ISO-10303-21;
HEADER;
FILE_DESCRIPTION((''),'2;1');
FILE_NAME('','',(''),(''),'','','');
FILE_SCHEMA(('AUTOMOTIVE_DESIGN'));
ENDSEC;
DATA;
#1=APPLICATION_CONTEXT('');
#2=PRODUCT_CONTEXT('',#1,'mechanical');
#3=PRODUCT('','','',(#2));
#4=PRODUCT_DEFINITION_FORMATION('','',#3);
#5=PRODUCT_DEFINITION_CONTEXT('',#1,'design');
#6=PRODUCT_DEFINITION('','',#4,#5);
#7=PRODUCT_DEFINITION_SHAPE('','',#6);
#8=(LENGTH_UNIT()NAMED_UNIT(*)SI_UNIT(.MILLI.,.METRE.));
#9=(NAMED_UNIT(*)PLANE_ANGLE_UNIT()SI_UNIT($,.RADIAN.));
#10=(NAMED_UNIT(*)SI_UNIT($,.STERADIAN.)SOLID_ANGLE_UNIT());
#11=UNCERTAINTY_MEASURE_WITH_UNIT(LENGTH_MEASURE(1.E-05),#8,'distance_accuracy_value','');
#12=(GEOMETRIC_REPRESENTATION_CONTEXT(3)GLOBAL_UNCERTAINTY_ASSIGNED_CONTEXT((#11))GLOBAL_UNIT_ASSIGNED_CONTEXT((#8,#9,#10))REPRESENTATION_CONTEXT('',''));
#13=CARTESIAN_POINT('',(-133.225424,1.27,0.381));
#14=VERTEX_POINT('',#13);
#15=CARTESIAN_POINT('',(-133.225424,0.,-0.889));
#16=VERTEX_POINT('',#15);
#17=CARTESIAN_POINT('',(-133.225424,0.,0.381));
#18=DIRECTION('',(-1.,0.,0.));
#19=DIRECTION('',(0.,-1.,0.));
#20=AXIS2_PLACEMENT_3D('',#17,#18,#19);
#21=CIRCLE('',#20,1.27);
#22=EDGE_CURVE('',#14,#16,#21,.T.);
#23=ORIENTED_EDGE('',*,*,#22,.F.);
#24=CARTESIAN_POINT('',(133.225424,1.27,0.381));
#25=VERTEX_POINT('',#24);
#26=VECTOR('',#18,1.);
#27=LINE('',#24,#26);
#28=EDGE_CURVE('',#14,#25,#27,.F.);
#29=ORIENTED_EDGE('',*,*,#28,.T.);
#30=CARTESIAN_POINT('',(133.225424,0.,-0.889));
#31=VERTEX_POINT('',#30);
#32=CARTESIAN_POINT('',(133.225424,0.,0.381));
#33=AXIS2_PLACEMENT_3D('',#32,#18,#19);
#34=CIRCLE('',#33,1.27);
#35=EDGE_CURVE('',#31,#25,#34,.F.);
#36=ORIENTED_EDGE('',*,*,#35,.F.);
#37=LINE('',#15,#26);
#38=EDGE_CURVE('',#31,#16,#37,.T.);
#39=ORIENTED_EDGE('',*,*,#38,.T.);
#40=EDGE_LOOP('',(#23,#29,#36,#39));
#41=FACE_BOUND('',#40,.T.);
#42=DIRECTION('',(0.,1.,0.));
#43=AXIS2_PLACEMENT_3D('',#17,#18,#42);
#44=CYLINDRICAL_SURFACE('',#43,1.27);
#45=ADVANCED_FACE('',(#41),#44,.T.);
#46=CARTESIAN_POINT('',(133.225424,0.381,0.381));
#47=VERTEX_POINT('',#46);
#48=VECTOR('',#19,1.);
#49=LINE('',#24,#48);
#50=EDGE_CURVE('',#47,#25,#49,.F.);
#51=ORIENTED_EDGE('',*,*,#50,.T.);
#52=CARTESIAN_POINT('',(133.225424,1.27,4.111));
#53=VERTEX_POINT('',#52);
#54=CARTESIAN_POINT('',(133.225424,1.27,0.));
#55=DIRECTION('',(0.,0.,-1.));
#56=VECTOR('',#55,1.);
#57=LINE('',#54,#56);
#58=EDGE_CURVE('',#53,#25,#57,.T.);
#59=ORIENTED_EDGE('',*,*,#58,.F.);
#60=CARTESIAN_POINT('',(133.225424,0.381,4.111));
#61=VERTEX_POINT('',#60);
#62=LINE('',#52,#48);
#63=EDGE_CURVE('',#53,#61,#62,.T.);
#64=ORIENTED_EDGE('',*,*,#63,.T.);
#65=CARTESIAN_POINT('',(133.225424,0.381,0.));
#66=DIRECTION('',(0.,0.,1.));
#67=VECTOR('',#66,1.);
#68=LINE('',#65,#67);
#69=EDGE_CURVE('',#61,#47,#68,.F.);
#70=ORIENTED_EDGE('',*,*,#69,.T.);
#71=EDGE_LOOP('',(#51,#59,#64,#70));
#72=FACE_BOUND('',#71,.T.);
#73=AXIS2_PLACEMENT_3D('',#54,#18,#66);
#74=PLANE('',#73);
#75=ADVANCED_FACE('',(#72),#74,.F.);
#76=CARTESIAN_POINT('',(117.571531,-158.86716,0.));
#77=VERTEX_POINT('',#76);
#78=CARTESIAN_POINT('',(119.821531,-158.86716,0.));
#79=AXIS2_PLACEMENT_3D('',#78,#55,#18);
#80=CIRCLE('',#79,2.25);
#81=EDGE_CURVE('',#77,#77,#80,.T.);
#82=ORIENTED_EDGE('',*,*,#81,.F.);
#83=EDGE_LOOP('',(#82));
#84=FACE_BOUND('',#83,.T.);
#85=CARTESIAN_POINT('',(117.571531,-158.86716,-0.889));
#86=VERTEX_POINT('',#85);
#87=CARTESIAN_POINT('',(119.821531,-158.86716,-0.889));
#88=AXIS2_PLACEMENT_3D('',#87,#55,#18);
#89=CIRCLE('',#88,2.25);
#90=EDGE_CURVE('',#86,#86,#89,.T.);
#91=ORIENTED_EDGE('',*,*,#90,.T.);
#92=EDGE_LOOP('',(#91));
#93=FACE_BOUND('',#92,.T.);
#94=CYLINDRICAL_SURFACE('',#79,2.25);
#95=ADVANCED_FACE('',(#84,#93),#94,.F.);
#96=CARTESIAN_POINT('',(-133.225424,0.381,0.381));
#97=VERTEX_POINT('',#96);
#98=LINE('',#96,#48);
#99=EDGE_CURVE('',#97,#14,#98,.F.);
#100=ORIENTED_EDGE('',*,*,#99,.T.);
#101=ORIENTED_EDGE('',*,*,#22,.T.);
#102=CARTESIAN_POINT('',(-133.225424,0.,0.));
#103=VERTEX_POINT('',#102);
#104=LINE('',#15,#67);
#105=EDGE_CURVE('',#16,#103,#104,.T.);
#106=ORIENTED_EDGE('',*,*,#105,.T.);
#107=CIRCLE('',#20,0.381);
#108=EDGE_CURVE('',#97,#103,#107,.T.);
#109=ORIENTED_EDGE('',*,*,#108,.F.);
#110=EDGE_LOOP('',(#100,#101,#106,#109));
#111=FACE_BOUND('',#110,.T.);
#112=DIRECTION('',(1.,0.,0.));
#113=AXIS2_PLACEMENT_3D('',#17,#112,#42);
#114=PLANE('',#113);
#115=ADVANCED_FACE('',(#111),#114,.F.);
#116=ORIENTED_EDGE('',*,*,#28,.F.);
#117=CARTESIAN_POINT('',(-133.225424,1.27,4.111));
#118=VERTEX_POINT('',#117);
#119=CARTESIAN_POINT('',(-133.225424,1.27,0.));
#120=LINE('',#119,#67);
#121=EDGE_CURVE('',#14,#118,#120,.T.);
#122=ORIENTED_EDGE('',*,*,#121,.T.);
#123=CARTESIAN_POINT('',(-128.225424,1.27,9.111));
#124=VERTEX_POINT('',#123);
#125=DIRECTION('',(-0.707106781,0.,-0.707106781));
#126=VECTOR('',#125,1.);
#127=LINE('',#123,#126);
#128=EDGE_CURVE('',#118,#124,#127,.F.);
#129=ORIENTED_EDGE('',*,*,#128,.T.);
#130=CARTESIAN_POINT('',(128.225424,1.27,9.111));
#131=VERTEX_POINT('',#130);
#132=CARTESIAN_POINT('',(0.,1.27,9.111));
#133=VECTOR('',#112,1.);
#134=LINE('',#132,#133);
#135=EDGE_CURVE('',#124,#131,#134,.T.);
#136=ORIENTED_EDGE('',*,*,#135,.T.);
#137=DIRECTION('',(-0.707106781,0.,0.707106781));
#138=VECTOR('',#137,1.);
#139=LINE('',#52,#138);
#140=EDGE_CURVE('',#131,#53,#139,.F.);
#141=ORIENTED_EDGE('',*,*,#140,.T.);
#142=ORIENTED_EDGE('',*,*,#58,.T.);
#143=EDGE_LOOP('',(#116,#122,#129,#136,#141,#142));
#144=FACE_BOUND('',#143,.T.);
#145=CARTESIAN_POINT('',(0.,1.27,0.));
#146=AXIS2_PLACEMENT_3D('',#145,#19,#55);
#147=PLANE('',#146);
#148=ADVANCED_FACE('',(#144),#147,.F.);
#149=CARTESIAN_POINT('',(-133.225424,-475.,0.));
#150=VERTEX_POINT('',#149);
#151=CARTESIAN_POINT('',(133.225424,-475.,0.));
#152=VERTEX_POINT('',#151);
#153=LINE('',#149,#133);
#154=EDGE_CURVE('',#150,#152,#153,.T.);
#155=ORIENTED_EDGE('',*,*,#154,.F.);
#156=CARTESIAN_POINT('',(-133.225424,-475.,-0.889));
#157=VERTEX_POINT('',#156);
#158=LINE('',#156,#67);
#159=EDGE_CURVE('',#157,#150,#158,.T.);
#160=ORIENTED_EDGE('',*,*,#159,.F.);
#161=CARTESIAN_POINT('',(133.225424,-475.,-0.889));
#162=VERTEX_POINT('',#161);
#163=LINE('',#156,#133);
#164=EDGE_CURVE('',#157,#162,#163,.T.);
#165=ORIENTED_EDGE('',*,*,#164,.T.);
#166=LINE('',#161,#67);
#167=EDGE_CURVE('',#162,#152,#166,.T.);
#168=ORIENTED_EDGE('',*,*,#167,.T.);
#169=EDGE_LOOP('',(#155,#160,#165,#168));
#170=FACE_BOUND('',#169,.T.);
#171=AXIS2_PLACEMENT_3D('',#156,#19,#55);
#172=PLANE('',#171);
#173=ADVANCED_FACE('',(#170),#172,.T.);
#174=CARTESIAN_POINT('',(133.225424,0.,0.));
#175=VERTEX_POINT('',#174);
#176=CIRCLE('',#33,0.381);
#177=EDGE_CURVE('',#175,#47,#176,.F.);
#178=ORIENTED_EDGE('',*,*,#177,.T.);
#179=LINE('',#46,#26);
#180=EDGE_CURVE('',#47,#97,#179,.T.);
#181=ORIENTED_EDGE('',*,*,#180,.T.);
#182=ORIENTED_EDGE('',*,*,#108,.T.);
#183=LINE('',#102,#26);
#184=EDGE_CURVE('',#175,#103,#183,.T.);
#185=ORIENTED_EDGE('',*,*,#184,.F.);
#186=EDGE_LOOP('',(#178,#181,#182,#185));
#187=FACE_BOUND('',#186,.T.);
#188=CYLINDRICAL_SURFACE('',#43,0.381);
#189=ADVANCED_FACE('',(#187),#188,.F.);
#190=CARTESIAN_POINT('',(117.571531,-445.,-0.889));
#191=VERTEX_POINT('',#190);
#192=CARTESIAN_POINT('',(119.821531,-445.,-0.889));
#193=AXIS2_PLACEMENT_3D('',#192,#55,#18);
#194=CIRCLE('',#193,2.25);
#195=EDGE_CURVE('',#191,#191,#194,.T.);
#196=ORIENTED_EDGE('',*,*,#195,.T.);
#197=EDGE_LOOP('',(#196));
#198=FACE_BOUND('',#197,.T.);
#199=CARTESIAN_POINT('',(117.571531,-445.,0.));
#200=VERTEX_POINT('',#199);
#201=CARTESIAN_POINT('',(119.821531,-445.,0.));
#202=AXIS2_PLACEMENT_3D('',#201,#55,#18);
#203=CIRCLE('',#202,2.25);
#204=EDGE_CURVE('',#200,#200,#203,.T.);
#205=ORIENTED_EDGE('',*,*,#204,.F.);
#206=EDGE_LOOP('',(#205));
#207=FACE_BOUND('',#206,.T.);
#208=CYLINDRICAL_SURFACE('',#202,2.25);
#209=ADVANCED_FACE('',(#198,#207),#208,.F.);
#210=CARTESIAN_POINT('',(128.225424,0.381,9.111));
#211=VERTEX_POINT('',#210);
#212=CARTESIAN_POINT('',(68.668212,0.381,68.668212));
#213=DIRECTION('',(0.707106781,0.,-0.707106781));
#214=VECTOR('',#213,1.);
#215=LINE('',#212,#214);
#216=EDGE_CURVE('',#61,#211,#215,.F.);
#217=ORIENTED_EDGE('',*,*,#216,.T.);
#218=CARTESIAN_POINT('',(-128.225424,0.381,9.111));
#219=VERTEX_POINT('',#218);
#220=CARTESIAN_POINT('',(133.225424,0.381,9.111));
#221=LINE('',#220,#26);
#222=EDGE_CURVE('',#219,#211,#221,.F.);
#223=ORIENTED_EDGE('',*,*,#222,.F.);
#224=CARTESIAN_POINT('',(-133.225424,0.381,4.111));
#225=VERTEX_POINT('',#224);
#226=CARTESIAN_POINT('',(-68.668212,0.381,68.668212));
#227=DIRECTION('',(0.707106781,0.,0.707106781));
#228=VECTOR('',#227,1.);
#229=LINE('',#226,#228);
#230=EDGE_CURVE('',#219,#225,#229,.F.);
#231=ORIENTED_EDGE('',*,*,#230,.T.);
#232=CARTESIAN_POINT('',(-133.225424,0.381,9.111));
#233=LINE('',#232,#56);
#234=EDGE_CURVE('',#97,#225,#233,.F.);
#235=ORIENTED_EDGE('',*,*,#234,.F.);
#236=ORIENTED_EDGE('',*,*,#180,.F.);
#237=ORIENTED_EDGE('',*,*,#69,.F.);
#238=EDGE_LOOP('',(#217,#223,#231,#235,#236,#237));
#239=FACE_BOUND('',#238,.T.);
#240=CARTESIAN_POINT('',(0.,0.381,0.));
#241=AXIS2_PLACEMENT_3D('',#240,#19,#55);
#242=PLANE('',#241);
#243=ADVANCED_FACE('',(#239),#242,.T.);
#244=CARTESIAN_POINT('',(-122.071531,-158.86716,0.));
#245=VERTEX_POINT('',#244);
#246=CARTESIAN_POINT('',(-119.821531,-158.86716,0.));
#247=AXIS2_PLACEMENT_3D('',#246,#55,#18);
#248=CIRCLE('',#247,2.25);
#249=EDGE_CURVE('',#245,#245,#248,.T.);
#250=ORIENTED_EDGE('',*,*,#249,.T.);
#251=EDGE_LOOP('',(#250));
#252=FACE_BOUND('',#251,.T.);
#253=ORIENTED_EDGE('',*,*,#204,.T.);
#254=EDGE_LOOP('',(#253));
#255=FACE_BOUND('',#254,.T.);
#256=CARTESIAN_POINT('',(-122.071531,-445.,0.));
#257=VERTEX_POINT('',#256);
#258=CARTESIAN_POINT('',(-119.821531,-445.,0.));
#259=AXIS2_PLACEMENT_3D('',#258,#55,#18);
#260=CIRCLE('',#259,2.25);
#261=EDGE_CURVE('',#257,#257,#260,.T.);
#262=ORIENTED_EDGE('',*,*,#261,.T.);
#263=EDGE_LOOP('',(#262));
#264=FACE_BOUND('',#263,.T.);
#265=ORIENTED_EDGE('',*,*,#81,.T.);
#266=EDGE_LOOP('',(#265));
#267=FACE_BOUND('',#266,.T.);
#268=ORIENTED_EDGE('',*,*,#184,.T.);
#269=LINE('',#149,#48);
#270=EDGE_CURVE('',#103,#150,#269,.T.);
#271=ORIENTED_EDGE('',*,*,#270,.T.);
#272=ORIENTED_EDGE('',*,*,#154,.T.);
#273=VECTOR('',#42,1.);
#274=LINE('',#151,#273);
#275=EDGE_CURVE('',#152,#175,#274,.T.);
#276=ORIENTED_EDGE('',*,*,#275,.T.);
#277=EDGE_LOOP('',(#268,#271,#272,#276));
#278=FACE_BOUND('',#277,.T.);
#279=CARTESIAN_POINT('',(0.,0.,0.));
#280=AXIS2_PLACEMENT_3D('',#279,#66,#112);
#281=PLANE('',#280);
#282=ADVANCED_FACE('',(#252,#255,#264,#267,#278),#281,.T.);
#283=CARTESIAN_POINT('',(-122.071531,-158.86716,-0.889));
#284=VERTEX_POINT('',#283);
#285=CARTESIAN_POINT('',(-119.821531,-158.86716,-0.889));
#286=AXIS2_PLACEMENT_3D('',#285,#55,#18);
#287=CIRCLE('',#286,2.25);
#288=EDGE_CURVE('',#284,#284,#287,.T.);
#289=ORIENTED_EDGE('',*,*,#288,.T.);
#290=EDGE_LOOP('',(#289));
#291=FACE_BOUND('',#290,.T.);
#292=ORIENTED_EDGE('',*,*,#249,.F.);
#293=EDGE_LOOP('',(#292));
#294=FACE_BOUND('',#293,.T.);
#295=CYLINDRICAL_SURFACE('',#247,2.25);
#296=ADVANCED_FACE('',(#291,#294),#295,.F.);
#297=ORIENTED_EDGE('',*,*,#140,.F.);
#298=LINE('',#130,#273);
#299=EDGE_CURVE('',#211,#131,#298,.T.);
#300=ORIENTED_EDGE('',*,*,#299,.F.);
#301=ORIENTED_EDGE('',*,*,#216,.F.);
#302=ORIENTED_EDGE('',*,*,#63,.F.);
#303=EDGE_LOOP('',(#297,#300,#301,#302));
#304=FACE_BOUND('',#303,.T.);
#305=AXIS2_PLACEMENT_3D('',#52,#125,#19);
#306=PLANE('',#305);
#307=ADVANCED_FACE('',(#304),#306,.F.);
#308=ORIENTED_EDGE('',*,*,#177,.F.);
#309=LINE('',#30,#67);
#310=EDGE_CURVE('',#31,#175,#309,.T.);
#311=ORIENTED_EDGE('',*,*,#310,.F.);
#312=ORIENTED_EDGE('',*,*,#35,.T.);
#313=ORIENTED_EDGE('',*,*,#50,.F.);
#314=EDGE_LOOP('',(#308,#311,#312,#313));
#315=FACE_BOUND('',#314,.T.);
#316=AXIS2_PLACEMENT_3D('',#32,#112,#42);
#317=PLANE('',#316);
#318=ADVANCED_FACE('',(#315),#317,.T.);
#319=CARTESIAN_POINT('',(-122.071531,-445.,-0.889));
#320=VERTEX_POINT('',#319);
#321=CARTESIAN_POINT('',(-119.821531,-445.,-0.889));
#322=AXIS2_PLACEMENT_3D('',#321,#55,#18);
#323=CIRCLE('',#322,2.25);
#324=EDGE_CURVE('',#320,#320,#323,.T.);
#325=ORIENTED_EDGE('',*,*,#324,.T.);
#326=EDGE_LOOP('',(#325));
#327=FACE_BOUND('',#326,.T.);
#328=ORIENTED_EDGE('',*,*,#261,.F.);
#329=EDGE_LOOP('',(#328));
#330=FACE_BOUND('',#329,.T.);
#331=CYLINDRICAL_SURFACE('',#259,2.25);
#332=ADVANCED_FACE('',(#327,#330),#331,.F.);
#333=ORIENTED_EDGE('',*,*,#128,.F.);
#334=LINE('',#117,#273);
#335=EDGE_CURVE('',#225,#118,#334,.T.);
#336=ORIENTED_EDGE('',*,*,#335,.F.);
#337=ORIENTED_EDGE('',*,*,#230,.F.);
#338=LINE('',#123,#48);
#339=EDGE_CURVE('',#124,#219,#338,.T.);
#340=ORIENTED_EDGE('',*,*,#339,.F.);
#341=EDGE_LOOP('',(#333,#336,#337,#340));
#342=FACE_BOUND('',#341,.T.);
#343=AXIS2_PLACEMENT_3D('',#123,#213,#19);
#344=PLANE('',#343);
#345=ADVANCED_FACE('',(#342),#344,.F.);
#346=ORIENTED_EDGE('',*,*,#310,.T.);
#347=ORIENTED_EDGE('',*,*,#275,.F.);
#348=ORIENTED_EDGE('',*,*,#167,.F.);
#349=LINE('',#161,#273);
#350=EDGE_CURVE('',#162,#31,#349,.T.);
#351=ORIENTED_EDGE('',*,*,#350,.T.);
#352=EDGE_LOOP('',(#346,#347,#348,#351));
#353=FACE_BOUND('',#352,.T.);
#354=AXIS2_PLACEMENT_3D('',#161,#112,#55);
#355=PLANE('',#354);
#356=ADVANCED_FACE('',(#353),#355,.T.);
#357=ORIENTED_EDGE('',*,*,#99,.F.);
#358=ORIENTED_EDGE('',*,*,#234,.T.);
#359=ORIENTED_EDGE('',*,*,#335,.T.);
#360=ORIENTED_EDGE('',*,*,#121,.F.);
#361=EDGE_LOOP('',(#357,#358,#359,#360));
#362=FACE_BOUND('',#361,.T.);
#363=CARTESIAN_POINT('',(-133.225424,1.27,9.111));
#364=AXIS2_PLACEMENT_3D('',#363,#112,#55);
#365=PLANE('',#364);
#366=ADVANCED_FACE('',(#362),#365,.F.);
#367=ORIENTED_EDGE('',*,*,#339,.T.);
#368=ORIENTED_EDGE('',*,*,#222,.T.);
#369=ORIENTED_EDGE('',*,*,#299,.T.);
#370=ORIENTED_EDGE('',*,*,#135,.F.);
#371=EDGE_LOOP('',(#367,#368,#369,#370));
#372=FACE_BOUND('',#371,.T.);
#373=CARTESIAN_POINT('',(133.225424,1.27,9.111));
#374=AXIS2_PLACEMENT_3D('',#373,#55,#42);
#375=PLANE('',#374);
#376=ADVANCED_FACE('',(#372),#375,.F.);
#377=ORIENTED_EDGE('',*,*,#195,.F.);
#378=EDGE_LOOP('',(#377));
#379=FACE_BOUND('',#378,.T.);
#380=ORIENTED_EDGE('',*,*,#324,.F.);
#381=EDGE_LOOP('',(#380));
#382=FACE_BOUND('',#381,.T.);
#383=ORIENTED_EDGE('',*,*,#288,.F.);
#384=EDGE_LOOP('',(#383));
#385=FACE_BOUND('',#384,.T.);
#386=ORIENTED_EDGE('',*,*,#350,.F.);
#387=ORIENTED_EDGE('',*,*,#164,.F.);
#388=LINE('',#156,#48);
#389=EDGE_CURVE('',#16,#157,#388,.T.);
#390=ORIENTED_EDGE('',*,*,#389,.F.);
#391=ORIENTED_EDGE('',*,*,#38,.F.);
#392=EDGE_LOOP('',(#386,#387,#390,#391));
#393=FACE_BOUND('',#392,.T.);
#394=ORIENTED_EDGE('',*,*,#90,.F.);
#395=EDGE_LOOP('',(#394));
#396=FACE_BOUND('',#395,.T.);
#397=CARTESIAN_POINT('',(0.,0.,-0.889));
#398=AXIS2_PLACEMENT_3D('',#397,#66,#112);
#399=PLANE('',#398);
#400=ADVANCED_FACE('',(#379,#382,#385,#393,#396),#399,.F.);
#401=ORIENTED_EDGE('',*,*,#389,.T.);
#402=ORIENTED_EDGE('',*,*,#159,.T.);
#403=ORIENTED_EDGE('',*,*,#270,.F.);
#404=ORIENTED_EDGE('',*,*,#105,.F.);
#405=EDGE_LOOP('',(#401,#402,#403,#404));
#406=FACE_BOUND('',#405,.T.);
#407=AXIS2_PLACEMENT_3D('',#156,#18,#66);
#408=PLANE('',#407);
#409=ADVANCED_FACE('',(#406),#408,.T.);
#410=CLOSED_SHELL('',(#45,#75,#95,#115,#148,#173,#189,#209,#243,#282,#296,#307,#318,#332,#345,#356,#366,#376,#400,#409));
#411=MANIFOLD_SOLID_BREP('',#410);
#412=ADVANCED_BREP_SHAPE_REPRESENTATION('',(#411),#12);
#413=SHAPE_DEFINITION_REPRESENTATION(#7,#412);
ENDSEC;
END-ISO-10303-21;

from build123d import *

# Parameters (mm, degrees)
SKETCH1_W           = 266.4508474
SKETCH1_H           = 475
BASE_FLANGE1_DEPTH  = 0.889
SKETCH6_R           = 2.25
CUT_EXTRUDE1_DEPTH  = 0.889
EDGE_FLANGE3_DEPTH  = 266.4508474
BREAK_CORNER1_START = 0.381
BREAK_CORNER1_DEPTH = 0.889


# Read off the part's stored shape, not the designer's step: Break-Corner1
# Sheet-metal steps are written as plain solids
with BuildPart() as part:
    # Sketch1 → Base-Flange1 (new body)
    with BuildSketch(Plane.XY):
        with Locations((0, -237.5)):
            Rectangle(SKETCH1_W, SKETCH1_H)
    extrude(amount=-BASE_FLANGE1_DEPTH)

    # Sketch6 → Cut-Extrude1 (cut)
    with BuildSketch(Plane(origin=(0, 0, -0.889), x_dir=(-1, 0, 0), z_dir=(0, 0, -1))):
        with Locations((-119.8215307, -158.867160024)):
            Circle(SKETCH6_R)
        with Locations((119.8215307, -158.867160024)):
            Circle(SKETCH6_R)
        with Locations((-119.8215307, -445)):
            Circle(SKETCH6_R)
        with Locations((119.8215307, -445)):
            Circle(SKETCH6_R)
    extrude(amount=-CUT_EXTRUDE1_DEPTH, mode=Mode.SUBTRACT)

    # Edge-Flange3 section (across the edge) → Edge-Flange3 (add)
    with BuildSketch(Plane(origin=(133.2254237, 0.381, 0), x_dir=(0, -1, 0), z_dir=(-1, 0, 0))):
        with BuildLine():
            Line((-0.889, 0.381), (-0.889, 9.111))
            Line((-0.889, 9.111), (0, 9.111))
            Line((0, 9.111), (0, 0.381))
            ThreePointArc((0, 0.381), (0.111592316, 0.111592316), (0.381, 0))
            Line((0.381, 0), (0.381, -0.889))
            ThreePointArc((0.381, -0.889), (-0.517025612, -0.517025612), (-0.889, 0.381))
        make_face()
    extrude(amount=EDGE_FLANGE3_DEPTH)

    # Break-Corner1 outline → Break-Corner1 (cut)
    with BuildSketch(Plane(origin=(0, 0, 0), x_dir=(1, 0, 0), z_dir=(0, 1, 0)).offset(BREAK_CORNER1_START)):
        Polygon((-133.2254237, -9.111), (-128.2254237, -9.111), (-133.2254237, -4.111), align=None)
        Polygon((133.2254237, -4.111), (128.2254237, -9.111), (133.2254237, -9.111), align=None)
    extrude(amount=BREAK_CORNER1_DEPTH, mode=Mode.SUBTRACT)


solid = part.part
